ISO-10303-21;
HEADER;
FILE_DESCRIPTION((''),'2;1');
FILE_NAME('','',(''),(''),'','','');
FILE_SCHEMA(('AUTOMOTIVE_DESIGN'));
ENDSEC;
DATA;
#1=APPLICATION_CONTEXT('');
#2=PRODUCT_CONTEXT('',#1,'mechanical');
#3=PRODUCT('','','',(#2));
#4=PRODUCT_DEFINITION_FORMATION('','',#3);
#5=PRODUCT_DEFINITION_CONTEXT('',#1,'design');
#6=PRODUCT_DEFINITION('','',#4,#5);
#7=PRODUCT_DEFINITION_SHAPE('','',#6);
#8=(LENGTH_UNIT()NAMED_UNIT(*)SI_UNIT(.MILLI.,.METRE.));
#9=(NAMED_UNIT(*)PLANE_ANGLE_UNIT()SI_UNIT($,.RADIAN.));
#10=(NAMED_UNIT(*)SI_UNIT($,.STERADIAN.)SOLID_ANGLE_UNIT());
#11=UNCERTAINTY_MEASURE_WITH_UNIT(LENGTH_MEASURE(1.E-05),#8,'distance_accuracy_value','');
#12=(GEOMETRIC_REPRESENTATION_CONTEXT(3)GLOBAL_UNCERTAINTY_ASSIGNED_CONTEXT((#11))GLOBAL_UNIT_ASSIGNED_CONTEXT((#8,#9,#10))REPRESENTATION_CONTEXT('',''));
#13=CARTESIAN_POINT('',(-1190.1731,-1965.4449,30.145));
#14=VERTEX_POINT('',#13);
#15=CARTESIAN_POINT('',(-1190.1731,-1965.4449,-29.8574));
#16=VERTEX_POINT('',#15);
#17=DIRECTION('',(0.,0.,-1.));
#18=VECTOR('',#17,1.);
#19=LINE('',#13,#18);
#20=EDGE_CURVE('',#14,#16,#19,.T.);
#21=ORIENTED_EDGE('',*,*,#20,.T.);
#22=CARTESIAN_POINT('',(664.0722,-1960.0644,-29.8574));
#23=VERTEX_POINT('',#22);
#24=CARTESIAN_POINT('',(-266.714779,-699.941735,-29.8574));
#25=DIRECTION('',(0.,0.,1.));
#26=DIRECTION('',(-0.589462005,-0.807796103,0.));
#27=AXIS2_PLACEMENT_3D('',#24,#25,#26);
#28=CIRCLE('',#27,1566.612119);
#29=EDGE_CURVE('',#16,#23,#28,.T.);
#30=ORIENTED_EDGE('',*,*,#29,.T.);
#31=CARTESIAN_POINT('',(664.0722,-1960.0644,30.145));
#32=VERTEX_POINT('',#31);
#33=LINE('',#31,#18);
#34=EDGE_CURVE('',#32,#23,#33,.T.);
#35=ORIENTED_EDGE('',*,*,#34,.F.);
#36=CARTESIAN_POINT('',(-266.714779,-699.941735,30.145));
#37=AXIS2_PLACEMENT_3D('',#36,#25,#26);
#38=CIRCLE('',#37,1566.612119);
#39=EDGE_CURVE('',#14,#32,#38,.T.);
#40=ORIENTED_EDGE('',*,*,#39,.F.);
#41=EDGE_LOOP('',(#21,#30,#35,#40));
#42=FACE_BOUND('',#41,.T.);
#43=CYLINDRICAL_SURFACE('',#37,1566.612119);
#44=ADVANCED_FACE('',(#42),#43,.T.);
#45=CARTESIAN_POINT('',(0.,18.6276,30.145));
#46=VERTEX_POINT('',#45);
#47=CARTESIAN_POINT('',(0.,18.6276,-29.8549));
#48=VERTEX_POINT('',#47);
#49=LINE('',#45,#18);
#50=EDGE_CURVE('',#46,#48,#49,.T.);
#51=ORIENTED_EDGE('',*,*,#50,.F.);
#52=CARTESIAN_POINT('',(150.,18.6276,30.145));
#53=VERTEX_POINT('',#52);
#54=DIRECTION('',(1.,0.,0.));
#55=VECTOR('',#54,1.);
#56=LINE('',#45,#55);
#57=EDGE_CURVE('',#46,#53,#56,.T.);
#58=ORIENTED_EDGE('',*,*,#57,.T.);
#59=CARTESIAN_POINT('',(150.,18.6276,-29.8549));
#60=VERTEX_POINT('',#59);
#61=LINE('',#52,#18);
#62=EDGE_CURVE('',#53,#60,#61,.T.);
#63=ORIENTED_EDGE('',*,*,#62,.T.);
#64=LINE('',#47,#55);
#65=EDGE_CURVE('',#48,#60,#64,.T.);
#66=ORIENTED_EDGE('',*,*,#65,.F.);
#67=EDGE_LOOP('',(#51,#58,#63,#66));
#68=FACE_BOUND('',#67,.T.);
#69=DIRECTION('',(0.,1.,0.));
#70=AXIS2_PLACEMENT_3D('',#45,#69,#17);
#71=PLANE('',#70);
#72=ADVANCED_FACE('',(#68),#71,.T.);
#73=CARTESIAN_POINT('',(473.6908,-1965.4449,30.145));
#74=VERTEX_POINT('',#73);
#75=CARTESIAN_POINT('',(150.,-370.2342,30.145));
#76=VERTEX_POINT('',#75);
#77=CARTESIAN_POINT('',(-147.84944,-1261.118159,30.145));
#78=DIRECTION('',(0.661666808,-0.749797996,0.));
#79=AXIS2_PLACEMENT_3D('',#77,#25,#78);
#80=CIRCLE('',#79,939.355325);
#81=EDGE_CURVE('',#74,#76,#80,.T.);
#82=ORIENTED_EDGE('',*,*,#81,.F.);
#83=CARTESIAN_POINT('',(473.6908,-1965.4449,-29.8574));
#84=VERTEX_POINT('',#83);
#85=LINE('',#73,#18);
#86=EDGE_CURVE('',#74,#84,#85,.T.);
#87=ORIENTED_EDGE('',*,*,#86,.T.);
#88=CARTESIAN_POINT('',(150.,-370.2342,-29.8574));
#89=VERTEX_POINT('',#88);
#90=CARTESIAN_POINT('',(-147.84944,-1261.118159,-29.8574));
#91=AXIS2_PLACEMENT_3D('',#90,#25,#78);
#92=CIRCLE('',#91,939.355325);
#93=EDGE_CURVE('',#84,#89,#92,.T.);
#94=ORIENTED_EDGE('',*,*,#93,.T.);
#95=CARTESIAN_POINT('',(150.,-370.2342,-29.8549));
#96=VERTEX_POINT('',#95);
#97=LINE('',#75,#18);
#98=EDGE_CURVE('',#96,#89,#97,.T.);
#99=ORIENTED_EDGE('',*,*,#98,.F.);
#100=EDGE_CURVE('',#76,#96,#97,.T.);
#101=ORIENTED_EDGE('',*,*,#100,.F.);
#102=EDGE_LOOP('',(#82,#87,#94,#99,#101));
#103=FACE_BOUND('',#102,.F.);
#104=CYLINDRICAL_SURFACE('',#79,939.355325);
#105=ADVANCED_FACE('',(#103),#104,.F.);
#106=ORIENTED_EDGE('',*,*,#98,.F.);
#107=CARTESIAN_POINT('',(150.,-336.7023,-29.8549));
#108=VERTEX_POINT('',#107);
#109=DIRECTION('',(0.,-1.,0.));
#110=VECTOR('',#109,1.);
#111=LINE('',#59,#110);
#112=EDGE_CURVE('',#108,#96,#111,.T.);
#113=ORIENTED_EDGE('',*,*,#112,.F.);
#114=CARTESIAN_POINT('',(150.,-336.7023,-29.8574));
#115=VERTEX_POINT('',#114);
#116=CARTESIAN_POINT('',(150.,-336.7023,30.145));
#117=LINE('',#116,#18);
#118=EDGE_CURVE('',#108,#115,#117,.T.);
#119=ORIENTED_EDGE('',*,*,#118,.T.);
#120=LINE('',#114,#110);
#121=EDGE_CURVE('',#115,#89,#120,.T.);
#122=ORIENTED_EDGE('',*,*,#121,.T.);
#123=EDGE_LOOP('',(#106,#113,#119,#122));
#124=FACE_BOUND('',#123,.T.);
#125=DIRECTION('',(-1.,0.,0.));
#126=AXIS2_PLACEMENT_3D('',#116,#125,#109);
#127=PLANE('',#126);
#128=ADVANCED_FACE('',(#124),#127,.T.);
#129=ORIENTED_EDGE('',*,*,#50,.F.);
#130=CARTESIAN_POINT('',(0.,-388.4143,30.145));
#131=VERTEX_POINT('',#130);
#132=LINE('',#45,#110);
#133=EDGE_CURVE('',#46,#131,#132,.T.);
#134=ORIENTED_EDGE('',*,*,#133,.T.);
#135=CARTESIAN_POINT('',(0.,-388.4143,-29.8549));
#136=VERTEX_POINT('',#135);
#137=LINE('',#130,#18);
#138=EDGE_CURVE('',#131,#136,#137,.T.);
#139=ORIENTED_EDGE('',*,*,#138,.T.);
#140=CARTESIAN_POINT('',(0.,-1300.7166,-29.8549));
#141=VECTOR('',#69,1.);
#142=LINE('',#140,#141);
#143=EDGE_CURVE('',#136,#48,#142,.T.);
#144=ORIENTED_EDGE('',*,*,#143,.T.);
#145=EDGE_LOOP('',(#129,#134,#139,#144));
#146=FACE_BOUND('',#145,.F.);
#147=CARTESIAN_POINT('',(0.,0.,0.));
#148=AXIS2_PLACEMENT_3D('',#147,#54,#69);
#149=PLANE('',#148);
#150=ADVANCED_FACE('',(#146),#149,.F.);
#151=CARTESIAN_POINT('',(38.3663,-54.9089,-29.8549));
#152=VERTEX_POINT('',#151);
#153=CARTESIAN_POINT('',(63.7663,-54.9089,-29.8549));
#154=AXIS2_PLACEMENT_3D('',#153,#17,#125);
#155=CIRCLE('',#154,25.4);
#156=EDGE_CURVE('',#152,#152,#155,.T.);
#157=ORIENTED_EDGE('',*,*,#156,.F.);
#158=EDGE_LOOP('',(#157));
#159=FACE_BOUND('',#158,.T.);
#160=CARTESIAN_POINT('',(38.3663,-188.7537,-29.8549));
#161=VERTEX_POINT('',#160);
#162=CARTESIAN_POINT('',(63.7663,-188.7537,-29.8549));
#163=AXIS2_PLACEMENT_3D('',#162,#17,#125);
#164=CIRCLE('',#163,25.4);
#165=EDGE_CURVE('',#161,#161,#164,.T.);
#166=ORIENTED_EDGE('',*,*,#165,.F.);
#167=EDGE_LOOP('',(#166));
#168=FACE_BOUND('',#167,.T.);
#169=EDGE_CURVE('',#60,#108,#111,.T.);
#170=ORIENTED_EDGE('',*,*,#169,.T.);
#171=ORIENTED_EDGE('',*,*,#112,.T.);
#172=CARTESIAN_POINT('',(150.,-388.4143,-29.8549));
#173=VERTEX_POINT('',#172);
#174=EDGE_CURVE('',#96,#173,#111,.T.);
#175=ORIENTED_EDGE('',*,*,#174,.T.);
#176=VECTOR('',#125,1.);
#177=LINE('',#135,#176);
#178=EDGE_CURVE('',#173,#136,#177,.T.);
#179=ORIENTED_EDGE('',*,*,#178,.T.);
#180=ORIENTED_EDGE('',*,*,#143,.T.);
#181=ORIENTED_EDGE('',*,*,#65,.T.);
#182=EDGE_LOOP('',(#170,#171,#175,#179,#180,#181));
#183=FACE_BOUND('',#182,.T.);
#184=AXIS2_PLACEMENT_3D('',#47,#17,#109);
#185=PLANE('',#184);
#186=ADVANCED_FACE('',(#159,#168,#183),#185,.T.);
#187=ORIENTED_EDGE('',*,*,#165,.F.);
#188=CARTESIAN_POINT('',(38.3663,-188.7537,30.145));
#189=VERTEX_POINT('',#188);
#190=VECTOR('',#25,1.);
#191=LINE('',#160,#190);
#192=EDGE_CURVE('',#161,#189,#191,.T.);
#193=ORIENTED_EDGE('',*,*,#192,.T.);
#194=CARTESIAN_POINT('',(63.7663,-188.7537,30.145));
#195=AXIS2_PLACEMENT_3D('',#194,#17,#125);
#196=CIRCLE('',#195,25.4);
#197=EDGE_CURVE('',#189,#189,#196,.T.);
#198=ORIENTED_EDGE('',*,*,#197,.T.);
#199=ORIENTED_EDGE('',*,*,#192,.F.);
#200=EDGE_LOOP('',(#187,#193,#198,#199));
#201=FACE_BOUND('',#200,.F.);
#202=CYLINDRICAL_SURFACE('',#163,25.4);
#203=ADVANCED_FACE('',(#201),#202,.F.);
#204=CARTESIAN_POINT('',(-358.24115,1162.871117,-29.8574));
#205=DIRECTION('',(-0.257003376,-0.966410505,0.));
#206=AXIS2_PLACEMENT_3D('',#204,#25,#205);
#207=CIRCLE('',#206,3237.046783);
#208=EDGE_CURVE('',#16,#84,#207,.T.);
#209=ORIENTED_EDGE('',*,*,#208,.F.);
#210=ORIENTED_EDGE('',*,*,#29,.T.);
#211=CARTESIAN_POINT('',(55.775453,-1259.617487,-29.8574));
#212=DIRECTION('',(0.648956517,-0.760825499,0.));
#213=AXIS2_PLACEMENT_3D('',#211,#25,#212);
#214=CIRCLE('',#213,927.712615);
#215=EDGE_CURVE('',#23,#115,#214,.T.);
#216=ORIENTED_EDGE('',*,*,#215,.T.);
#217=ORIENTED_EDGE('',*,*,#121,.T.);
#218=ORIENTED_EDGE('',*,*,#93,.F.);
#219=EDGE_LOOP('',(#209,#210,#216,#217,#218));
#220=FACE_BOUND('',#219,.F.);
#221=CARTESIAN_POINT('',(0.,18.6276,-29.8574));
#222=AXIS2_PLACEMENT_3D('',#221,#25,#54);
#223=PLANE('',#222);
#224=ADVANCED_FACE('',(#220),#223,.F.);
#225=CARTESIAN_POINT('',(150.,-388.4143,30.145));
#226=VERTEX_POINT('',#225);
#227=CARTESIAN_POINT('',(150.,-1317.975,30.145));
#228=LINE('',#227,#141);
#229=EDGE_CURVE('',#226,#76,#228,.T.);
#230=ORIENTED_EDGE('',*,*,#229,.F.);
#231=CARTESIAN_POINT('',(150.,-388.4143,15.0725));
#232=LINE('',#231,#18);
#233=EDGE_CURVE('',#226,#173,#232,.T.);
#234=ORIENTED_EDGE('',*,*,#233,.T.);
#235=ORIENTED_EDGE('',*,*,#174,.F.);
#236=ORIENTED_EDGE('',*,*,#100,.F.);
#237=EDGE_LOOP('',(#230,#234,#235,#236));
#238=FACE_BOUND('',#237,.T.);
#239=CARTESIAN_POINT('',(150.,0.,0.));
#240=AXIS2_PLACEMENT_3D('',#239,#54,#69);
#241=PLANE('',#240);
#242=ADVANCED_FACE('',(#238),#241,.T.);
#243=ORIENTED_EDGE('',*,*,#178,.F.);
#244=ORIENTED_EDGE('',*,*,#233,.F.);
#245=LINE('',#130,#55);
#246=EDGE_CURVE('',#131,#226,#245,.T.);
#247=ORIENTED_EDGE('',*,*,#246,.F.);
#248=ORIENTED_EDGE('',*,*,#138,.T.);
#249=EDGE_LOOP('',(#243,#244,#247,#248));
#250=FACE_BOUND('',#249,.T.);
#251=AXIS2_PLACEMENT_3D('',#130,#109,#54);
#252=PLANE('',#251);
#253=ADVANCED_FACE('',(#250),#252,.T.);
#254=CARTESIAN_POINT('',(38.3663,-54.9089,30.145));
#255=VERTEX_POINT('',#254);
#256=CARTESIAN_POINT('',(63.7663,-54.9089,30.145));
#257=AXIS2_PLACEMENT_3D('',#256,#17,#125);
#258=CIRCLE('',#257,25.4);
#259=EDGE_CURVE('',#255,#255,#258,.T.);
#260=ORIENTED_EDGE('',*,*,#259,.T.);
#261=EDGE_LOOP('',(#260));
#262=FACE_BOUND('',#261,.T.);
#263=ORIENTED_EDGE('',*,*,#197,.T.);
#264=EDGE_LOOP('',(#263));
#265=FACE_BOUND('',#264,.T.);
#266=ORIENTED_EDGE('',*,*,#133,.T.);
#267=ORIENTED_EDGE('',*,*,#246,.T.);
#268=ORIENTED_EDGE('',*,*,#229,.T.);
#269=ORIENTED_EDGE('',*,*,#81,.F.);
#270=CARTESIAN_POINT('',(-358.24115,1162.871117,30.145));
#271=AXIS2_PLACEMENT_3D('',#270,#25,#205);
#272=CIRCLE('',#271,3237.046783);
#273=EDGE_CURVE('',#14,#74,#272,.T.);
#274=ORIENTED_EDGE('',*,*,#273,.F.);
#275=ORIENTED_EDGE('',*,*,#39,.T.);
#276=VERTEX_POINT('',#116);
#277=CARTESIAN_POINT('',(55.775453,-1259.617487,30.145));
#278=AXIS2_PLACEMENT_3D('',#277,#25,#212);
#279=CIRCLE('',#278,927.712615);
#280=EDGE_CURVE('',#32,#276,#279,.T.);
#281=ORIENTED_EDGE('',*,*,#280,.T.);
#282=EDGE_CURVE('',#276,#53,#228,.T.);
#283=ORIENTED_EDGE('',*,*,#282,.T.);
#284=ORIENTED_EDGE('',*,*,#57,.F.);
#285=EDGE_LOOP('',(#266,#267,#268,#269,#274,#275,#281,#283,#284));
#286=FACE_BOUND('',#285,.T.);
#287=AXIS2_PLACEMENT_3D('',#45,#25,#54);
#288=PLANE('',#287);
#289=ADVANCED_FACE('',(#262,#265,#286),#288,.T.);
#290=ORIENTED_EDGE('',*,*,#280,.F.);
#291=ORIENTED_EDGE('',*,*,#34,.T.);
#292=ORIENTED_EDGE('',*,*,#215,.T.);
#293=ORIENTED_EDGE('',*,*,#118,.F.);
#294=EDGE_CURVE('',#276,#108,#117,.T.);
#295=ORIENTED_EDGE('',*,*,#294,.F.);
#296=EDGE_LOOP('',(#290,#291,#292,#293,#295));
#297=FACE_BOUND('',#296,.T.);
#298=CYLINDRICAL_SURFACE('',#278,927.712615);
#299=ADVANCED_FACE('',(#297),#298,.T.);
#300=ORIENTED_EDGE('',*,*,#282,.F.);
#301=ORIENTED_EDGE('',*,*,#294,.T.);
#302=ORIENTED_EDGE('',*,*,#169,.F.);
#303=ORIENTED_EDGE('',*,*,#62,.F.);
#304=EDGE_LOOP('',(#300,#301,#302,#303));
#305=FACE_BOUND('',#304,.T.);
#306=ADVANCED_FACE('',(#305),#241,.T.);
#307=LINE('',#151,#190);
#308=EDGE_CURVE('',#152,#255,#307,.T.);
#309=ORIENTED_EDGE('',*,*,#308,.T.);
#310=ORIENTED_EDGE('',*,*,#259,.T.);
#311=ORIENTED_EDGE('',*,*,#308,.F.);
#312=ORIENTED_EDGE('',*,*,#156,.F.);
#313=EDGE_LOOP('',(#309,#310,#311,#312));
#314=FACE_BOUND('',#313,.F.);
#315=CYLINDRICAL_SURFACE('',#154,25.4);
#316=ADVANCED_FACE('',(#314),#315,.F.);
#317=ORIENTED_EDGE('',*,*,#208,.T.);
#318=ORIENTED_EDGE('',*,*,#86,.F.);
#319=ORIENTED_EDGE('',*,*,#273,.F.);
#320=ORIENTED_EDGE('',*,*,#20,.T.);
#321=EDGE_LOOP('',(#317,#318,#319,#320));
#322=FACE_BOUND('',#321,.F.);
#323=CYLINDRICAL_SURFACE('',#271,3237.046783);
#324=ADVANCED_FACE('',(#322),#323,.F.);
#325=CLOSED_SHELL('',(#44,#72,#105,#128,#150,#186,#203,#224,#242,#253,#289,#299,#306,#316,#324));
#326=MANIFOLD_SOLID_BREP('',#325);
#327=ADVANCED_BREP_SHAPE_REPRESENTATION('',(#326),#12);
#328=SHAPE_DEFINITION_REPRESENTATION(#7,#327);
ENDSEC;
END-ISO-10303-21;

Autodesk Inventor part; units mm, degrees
ref_plane "YZ Plane" through (0, 0, 0) normal (1, 0, 0) x (0, 1, 0)
ref_plane "XZ Plane" through (0, 0, 0) normal (0, 1, 0) x (-1, 0, 0)
ref_plane "XY Plane" through (0, 0, 0) normal (0, 0, 1) x (1, 0, 0)
sketch "Sketch1" plane through (0, 0, 0) normal (1, 0, 0) x (0, 1, 0)
  line L0 (18.6276, 30.145) -> (-681.3735, 30.145)
  line L1 (18.6276, 30.145) -> (18.6276, -29.8549)
  line L2 (18.6276, -29.8549) -> (-681.3735, -29.8549)
  line L3 (-681.3735, 30.145) -> (-1317.975, 30.145)
  line L4 (-1317.975, 30.145) -> (-1300.7166, -29.8549)
  line L5 (-1300.7166, -29.8549) -> (-681.3735, -29.8549)
  point P0 (0, 0)
  dimension "d0" = 700.0011
  dimension "d1" = 59.9999
extrude "Extrusion1" add sketch "Sketch1" along normal blind 150
sketch "Sketch2" plane through (0, 18.6276, 30.145) normal (0, 1, 0) x (1, 0, 0)
  line L0 (30.0948, 48.0392) -> (130.9532, 48.0392) construction
  line L1 (130.9532, 48.0392) -> (130.9532, 12.2508) construction
  line L2 (130.9532, 12.2508) -> (30.0948, 12.2508) construction
  line L3 (30.0948, 12.2508) -> (30.0948, 48.0392) construction
  point P0 (0, 30.145)
fillet "Fillet1" [suppressed]
chamfer "Chamfer1" [suppressed]
sketch "Sketch3" plane through (150, 18.6276, -29.8549) normal (0, 0, -1) x (-1, 0, 0)
  circle A0 centre (86.2337, -73.5365) radius 25.4
  circle A1 centre (86.2337, -207.3813) radius 25.4
  point P0 (150, -18.6276)
  dimension "d8" = 50.8
  dimension "d9" = 50.8
extrude "Extrusion2" cut sketch "Sketch3" against normal blind 150
fillet "Fillet2" radius 203.2 1 edges at (150, -1309.3458, 0.1451)
sketch "Sketch4" plane through (0, 18.6276, 30.145) normal (0, 0, 1) x (1, 0, 0)
  line L0 (0, 0) -> (0, -1336.6026) projected
  line L1 (0, -407.0419) -> (196.678, -407.0419)
  line L2 (196.678, -407.0419) -> (196.678, -1363.7468)
  line L3 (196.678, -1363.7468) -> (0, -1363.7468)
  line L4 (0, -1363.7468) -> (0, -407.0419)
  point P0 (0, -18.6276)
extrude "Extrusion3" cut sketch "Sketch4" against normal blind 76.2
sketch "Sketch5" plane through (0, 18.6276, 30.145) normal (0, 0, 1) x (1, 0, 0)
  arc A0 (657.8206, -1984.0725) -> (111.0415, -352.1801) centre (55.7755, -1278.2451) ccw
  arc A1 (-1190.1731, -1984.0725) -> (664.0722, -1978.692) centre (-266.7148, -718.5694) ccw
  arc A2 (473.6908, -1984.0725) -> (0.5095, -352.1801) centre (-147.8493, -1279.7458) ccw
  arc A3 (-1190.1731, -1984.0725) -> (473.6908, -1984.0725) centre (-358.2411, 1144.2439) ccw
  line L0 (0.5095, -352.1801) -> (111.0415, -352.1801)
  line L1 (150, -407.0419) -> (150, 0) projected
  line L2 (150, 0) -> (150, -407.0419) projected
  line L3 (150, -355.3299) -> (150, -388.8618)
  point P0 (0, -18.6276)
extrude "Extrusion4" add sketch "Sketch5" against normal blind 60.0024 contours A1 A3 A2 L1 A0
properties part number "legplate" material "CFRP"
